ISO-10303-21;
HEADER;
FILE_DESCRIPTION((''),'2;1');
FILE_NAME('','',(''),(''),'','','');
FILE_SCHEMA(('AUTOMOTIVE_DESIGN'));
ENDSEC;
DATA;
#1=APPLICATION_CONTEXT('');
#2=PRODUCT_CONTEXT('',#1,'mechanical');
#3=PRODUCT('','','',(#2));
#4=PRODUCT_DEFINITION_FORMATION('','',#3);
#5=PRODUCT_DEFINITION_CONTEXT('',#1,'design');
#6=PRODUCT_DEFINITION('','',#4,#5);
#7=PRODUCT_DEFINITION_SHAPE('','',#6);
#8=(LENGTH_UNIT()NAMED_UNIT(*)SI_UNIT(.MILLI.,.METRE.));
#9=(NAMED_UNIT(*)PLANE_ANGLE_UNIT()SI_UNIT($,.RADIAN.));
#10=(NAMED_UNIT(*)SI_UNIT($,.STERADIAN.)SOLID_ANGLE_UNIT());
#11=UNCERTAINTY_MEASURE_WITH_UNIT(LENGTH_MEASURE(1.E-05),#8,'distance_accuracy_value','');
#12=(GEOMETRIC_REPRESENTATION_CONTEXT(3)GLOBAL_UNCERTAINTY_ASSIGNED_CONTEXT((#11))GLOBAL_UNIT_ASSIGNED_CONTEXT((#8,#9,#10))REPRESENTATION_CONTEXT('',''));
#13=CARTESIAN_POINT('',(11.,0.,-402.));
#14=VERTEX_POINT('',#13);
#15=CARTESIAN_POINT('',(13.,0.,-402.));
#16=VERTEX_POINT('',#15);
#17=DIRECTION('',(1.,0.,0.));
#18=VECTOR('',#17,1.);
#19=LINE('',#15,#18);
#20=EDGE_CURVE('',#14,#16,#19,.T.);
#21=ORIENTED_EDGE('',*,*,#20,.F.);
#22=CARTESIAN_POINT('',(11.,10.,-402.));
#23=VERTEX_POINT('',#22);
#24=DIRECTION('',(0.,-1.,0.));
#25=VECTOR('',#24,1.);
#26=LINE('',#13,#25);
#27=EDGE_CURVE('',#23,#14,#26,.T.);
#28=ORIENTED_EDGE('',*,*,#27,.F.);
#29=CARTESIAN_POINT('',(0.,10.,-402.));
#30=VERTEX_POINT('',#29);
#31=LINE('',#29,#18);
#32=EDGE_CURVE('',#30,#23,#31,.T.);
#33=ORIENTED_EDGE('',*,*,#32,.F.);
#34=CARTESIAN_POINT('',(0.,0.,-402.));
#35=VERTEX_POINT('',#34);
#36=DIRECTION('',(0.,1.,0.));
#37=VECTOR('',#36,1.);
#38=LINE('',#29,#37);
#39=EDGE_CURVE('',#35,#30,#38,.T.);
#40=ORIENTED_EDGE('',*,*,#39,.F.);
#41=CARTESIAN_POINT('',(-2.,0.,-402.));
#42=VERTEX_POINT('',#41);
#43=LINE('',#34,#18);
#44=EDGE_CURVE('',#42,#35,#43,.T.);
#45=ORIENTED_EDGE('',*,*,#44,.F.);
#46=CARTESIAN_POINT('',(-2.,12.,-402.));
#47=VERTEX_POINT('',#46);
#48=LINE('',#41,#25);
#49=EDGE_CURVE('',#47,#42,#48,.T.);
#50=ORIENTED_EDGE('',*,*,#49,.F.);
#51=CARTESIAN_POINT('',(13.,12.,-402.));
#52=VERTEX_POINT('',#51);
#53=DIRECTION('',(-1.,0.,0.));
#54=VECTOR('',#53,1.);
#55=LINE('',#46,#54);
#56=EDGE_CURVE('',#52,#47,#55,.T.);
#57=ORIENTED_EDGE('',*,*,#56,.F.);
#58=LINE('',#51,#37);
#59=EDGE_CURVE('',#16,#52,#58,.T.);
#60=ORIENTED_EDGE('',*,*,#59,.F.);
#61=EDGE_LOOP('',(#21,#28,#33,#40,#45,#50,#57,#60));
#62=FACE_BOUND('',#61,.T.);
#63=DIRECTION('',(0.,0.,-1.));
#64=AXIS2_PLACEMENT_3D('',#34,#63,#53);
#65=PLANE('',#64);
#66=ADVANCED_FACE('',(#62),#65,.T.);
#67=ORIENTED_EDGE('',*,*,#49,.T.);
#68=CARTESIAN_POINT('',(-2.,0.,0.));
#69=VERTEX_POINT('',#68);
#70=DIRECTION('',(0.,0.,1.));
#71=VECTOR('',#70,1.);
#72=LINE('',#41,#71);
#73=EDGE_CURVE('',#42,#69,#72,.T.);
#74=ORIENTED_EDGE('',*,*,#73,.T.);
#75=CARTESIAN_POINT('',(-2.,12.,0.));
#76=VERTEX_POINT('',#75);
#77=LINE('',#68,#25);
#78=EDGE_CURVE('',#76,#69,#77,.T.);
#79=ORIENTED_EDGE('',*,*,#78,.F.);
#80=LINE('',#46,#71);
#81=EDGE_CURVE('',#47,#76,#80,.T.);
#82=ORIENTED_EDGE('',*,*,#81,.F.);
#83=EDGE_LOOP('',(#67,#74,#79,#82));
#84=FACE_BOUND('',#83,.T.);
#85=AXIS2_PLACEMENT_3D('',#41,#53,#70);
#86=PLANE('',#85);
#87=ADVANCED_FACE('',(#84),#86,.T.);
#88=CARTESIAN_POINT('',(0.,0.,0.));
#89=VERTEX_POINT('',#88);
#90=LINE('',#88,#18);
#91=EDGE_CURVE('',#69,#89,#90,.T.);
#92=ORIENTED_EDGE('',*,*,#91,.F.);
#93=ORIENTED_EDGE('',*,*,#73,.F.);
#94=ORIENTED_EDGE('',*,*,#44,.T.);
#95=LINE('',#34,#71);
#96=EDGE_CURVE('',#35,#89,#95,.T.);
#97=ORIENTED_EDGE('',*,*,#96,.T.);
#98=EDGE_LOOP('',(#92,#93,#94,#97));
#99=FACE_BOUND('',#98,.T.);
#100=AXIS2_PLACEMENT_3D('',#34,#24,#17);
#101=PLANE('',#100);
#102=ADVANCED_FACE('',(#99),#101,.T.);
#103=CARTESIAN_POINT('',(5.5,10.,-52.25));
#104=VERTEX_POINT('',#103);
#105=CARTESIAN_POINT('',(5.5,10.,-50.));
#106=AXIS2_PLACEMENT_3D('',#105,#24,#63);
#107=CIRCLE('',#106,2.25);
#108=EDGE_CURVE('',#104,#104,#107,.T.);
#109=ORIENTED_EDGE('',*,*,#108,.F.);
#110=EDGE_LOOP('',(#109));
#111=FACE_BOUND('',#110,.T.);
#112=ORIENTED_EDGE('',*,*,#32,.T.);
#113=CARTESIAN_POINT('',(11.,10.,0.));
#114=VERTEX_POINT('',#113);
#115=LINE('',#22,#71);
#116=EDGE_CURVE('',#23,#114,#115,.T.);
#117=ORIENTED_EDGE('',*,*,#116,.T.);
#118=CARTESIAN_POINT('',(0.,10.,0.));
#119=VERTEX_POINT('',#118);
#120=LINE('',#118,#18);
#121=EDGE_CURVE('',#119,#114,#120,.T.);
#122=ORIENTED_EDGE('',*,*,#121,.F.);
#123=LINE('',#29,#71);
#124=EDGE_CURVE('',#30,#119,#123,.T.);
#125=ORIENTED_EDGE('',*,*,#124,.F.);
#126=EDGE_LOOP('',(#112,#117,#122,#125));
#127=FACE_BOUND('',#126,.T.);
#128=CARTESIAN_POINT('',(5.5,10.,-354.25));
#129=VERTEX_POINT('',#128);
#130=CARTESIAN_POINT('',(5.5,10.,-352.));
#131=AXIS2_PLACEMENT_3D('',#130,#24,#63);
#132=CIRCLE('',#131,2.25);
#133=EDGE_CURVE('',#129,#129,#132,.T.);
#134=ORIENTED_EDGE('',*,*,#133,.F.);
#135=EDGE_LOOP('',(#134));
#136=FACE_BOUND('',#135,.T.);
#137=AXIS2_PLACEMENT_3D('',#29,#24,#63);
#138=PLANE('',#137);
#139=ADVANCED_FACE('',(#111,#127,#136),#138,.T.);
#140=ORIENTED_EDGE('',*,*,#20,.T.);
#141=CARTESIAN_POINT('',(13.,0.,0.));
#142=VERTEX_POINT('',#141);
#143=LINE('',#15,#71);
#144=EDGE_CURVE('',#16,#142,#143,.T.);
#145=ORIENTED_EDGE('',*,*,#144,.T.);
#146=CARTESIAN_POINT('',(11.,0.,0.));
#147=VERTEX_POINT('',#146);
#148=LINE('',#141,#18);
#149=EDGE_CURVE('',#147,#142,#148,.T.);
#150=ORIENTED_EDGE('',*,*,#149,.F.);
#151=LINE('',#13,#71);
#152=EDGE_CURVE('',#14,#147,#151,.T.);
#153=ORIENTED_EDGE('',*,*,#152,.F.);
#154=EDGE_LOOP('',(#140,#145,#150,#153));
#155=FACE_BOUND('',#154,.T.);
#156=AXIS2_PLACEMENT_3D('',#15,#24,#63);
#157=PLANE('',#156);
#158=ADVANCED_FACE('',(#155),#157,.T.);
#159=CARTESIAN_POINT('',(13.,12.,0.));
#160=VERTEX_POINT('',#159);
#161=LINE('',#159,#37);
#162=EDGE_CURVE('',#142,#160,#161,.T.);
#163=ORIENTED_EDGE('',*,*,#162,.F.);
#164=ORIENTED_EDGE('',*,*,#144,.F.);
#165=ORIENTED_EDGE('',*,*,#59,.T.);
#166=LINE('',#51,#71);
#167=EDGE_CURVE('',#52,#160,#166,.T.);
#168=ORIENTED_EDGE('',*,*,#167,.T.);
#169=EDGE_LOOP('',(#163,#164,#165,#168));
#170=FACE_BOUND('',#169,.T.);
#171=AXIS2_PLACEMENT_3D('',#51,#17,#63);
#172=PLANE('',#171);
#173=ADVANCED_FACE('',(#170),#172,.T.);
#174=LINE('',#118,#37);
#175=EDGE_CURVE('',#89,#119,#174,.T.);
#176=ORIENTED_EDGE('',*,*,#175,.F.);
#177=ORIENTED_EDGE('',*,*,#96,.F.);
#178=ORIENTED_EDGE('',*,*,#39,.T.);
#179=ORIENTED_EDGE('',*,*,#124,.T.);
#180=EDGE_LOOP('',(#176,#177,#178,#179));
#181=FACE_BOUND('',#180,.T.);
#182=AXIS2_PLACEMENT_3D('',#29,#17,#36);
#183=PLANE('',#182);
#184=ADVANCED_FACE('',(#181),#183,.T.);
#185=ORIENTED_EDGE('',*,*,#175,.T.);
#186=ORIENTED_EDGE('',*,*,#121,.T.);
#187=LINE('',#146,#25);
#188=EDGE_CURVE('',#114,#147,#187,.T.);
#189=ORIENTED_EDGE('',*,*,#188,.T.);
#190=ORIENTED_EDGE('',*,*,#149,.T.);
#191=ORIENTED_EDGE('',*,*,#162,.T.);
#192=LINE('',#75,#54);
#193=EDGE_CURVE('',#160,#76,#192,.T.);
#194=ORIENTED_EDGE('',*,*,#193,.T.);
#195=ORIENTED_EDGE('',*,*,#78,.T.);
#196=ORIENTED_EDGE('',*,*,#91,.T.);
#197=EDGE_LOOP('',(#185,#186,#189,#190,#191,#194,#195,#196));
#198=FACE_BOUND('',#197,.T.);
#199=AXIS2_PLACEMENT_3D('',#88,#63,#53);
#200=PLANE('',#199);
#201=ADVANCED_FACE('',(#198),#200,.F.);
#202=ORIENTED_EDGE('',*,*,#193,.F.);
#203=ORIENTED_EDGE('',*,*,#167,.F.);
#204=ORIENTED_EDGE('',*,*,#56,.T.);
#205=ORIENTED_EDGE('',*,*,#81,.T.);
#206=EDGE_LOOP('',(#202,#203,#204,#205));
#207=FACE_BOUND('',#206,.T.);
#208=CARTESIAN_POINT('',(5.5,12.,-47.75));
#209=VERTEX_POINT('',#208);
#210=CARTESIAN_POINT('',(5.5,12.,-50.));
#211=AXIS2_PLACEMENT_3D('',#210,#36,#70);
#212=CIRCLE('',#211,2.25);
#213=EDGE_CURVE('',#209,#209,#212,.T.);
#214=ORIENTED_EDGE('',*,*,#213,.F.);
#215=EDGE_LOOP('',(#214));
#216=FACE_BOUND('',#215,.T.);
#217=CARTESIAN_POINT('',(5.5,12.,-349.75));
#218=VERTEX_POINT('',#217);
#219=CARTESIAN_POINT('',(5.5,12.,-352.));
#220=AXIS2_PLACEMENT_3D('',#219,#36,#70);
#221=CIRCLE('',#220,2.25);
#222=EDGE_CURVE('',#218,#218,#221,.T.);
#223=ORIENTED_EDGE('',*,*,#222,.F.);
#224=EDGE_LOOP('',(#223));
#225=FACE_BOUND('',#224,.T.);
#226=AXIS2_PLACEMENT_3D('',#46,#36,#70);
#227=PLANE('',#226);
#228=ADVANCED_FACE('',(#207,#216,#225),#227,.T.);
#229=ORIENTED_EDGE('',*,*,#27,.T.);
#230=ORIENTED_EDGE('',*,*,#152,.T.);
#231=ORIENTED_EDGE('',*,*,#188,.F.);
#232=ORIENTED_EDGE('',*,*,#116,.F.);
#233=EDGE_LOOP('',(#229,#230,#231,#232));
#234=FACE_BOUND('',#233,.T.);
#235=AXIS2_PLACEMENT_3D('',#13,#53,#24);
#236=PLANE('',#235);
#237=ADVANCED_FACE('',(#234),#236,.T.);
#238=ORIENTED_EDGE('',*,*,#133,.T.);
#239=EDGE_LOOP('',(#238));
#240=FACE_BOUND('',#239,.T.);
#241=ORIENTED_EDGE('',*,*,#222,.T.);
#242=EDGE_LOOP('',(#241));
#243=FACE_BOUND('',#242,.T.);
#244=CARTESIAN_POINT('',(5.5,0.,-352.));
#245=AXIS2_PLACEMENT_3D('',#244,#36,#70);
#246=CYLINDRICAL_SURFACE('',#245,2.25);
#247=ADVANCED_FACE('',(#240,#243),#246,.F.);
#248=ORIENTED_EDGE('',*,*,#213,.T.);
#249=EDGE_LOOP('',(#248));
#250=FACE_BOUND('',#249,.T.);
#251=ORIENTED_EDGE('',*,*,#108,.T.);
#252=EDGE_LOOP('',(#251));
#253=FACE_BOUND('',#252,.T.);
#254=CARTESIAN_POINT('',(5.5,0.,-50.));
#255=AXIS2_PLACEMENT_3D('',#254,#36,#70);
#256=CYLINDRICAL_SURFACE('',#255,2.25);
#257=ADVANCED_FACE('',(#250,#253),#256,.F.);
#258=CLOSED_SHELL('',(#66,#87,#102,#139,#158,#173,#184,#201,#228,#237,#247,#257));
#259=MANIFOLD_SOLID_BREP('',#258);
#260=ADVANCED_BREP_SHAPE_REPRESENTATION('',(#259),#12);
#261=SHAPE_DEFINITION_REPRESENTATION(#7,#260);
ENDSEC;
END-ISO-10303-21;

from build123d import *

# Parameters (mm, degrees)
SM_BASE_FLANGE_2_DEPTH = 402
SKETCH_7_R             = 2.25
CUT_EXTRUDE_1_DEPTH    = 403.389115161


# Sheet-metal steps are written as plain solids
with BuildPart() as part:
    # Эскиз6 → Базовая кромка2 (new body)
    with BuildSketch(Plane.XY):
        Polygon((0, 0), (-2, 0), (-2, 12), (13, 12), (13, 0), (11, 0), (11, 10), (0, 10), align=None)
    extrude(amount=-SM_BASE_FLANGE_2_DEPTH)

    # Эскиз7 → Вырез-Вытянуть1 (cut, through all)
    with BuildSketch(Plane(origin=(0, 12, 0), x_dir=(1, 0, 0), z_dir=(0, 1, 0))):
        with Locations(Location((5.5, 50, 0), (0, 0, 270))):
            Circle(SKETCH_7_R)
        with Locations(Location((5.5, 352, 0), (0, 0, 270))):
            Circle(SKETCH_7_R)
    extrude(amount=-CUT_EXTRUDE_1_DEPTH, mode=Mode.SUBTRACT)


solid = part.part
